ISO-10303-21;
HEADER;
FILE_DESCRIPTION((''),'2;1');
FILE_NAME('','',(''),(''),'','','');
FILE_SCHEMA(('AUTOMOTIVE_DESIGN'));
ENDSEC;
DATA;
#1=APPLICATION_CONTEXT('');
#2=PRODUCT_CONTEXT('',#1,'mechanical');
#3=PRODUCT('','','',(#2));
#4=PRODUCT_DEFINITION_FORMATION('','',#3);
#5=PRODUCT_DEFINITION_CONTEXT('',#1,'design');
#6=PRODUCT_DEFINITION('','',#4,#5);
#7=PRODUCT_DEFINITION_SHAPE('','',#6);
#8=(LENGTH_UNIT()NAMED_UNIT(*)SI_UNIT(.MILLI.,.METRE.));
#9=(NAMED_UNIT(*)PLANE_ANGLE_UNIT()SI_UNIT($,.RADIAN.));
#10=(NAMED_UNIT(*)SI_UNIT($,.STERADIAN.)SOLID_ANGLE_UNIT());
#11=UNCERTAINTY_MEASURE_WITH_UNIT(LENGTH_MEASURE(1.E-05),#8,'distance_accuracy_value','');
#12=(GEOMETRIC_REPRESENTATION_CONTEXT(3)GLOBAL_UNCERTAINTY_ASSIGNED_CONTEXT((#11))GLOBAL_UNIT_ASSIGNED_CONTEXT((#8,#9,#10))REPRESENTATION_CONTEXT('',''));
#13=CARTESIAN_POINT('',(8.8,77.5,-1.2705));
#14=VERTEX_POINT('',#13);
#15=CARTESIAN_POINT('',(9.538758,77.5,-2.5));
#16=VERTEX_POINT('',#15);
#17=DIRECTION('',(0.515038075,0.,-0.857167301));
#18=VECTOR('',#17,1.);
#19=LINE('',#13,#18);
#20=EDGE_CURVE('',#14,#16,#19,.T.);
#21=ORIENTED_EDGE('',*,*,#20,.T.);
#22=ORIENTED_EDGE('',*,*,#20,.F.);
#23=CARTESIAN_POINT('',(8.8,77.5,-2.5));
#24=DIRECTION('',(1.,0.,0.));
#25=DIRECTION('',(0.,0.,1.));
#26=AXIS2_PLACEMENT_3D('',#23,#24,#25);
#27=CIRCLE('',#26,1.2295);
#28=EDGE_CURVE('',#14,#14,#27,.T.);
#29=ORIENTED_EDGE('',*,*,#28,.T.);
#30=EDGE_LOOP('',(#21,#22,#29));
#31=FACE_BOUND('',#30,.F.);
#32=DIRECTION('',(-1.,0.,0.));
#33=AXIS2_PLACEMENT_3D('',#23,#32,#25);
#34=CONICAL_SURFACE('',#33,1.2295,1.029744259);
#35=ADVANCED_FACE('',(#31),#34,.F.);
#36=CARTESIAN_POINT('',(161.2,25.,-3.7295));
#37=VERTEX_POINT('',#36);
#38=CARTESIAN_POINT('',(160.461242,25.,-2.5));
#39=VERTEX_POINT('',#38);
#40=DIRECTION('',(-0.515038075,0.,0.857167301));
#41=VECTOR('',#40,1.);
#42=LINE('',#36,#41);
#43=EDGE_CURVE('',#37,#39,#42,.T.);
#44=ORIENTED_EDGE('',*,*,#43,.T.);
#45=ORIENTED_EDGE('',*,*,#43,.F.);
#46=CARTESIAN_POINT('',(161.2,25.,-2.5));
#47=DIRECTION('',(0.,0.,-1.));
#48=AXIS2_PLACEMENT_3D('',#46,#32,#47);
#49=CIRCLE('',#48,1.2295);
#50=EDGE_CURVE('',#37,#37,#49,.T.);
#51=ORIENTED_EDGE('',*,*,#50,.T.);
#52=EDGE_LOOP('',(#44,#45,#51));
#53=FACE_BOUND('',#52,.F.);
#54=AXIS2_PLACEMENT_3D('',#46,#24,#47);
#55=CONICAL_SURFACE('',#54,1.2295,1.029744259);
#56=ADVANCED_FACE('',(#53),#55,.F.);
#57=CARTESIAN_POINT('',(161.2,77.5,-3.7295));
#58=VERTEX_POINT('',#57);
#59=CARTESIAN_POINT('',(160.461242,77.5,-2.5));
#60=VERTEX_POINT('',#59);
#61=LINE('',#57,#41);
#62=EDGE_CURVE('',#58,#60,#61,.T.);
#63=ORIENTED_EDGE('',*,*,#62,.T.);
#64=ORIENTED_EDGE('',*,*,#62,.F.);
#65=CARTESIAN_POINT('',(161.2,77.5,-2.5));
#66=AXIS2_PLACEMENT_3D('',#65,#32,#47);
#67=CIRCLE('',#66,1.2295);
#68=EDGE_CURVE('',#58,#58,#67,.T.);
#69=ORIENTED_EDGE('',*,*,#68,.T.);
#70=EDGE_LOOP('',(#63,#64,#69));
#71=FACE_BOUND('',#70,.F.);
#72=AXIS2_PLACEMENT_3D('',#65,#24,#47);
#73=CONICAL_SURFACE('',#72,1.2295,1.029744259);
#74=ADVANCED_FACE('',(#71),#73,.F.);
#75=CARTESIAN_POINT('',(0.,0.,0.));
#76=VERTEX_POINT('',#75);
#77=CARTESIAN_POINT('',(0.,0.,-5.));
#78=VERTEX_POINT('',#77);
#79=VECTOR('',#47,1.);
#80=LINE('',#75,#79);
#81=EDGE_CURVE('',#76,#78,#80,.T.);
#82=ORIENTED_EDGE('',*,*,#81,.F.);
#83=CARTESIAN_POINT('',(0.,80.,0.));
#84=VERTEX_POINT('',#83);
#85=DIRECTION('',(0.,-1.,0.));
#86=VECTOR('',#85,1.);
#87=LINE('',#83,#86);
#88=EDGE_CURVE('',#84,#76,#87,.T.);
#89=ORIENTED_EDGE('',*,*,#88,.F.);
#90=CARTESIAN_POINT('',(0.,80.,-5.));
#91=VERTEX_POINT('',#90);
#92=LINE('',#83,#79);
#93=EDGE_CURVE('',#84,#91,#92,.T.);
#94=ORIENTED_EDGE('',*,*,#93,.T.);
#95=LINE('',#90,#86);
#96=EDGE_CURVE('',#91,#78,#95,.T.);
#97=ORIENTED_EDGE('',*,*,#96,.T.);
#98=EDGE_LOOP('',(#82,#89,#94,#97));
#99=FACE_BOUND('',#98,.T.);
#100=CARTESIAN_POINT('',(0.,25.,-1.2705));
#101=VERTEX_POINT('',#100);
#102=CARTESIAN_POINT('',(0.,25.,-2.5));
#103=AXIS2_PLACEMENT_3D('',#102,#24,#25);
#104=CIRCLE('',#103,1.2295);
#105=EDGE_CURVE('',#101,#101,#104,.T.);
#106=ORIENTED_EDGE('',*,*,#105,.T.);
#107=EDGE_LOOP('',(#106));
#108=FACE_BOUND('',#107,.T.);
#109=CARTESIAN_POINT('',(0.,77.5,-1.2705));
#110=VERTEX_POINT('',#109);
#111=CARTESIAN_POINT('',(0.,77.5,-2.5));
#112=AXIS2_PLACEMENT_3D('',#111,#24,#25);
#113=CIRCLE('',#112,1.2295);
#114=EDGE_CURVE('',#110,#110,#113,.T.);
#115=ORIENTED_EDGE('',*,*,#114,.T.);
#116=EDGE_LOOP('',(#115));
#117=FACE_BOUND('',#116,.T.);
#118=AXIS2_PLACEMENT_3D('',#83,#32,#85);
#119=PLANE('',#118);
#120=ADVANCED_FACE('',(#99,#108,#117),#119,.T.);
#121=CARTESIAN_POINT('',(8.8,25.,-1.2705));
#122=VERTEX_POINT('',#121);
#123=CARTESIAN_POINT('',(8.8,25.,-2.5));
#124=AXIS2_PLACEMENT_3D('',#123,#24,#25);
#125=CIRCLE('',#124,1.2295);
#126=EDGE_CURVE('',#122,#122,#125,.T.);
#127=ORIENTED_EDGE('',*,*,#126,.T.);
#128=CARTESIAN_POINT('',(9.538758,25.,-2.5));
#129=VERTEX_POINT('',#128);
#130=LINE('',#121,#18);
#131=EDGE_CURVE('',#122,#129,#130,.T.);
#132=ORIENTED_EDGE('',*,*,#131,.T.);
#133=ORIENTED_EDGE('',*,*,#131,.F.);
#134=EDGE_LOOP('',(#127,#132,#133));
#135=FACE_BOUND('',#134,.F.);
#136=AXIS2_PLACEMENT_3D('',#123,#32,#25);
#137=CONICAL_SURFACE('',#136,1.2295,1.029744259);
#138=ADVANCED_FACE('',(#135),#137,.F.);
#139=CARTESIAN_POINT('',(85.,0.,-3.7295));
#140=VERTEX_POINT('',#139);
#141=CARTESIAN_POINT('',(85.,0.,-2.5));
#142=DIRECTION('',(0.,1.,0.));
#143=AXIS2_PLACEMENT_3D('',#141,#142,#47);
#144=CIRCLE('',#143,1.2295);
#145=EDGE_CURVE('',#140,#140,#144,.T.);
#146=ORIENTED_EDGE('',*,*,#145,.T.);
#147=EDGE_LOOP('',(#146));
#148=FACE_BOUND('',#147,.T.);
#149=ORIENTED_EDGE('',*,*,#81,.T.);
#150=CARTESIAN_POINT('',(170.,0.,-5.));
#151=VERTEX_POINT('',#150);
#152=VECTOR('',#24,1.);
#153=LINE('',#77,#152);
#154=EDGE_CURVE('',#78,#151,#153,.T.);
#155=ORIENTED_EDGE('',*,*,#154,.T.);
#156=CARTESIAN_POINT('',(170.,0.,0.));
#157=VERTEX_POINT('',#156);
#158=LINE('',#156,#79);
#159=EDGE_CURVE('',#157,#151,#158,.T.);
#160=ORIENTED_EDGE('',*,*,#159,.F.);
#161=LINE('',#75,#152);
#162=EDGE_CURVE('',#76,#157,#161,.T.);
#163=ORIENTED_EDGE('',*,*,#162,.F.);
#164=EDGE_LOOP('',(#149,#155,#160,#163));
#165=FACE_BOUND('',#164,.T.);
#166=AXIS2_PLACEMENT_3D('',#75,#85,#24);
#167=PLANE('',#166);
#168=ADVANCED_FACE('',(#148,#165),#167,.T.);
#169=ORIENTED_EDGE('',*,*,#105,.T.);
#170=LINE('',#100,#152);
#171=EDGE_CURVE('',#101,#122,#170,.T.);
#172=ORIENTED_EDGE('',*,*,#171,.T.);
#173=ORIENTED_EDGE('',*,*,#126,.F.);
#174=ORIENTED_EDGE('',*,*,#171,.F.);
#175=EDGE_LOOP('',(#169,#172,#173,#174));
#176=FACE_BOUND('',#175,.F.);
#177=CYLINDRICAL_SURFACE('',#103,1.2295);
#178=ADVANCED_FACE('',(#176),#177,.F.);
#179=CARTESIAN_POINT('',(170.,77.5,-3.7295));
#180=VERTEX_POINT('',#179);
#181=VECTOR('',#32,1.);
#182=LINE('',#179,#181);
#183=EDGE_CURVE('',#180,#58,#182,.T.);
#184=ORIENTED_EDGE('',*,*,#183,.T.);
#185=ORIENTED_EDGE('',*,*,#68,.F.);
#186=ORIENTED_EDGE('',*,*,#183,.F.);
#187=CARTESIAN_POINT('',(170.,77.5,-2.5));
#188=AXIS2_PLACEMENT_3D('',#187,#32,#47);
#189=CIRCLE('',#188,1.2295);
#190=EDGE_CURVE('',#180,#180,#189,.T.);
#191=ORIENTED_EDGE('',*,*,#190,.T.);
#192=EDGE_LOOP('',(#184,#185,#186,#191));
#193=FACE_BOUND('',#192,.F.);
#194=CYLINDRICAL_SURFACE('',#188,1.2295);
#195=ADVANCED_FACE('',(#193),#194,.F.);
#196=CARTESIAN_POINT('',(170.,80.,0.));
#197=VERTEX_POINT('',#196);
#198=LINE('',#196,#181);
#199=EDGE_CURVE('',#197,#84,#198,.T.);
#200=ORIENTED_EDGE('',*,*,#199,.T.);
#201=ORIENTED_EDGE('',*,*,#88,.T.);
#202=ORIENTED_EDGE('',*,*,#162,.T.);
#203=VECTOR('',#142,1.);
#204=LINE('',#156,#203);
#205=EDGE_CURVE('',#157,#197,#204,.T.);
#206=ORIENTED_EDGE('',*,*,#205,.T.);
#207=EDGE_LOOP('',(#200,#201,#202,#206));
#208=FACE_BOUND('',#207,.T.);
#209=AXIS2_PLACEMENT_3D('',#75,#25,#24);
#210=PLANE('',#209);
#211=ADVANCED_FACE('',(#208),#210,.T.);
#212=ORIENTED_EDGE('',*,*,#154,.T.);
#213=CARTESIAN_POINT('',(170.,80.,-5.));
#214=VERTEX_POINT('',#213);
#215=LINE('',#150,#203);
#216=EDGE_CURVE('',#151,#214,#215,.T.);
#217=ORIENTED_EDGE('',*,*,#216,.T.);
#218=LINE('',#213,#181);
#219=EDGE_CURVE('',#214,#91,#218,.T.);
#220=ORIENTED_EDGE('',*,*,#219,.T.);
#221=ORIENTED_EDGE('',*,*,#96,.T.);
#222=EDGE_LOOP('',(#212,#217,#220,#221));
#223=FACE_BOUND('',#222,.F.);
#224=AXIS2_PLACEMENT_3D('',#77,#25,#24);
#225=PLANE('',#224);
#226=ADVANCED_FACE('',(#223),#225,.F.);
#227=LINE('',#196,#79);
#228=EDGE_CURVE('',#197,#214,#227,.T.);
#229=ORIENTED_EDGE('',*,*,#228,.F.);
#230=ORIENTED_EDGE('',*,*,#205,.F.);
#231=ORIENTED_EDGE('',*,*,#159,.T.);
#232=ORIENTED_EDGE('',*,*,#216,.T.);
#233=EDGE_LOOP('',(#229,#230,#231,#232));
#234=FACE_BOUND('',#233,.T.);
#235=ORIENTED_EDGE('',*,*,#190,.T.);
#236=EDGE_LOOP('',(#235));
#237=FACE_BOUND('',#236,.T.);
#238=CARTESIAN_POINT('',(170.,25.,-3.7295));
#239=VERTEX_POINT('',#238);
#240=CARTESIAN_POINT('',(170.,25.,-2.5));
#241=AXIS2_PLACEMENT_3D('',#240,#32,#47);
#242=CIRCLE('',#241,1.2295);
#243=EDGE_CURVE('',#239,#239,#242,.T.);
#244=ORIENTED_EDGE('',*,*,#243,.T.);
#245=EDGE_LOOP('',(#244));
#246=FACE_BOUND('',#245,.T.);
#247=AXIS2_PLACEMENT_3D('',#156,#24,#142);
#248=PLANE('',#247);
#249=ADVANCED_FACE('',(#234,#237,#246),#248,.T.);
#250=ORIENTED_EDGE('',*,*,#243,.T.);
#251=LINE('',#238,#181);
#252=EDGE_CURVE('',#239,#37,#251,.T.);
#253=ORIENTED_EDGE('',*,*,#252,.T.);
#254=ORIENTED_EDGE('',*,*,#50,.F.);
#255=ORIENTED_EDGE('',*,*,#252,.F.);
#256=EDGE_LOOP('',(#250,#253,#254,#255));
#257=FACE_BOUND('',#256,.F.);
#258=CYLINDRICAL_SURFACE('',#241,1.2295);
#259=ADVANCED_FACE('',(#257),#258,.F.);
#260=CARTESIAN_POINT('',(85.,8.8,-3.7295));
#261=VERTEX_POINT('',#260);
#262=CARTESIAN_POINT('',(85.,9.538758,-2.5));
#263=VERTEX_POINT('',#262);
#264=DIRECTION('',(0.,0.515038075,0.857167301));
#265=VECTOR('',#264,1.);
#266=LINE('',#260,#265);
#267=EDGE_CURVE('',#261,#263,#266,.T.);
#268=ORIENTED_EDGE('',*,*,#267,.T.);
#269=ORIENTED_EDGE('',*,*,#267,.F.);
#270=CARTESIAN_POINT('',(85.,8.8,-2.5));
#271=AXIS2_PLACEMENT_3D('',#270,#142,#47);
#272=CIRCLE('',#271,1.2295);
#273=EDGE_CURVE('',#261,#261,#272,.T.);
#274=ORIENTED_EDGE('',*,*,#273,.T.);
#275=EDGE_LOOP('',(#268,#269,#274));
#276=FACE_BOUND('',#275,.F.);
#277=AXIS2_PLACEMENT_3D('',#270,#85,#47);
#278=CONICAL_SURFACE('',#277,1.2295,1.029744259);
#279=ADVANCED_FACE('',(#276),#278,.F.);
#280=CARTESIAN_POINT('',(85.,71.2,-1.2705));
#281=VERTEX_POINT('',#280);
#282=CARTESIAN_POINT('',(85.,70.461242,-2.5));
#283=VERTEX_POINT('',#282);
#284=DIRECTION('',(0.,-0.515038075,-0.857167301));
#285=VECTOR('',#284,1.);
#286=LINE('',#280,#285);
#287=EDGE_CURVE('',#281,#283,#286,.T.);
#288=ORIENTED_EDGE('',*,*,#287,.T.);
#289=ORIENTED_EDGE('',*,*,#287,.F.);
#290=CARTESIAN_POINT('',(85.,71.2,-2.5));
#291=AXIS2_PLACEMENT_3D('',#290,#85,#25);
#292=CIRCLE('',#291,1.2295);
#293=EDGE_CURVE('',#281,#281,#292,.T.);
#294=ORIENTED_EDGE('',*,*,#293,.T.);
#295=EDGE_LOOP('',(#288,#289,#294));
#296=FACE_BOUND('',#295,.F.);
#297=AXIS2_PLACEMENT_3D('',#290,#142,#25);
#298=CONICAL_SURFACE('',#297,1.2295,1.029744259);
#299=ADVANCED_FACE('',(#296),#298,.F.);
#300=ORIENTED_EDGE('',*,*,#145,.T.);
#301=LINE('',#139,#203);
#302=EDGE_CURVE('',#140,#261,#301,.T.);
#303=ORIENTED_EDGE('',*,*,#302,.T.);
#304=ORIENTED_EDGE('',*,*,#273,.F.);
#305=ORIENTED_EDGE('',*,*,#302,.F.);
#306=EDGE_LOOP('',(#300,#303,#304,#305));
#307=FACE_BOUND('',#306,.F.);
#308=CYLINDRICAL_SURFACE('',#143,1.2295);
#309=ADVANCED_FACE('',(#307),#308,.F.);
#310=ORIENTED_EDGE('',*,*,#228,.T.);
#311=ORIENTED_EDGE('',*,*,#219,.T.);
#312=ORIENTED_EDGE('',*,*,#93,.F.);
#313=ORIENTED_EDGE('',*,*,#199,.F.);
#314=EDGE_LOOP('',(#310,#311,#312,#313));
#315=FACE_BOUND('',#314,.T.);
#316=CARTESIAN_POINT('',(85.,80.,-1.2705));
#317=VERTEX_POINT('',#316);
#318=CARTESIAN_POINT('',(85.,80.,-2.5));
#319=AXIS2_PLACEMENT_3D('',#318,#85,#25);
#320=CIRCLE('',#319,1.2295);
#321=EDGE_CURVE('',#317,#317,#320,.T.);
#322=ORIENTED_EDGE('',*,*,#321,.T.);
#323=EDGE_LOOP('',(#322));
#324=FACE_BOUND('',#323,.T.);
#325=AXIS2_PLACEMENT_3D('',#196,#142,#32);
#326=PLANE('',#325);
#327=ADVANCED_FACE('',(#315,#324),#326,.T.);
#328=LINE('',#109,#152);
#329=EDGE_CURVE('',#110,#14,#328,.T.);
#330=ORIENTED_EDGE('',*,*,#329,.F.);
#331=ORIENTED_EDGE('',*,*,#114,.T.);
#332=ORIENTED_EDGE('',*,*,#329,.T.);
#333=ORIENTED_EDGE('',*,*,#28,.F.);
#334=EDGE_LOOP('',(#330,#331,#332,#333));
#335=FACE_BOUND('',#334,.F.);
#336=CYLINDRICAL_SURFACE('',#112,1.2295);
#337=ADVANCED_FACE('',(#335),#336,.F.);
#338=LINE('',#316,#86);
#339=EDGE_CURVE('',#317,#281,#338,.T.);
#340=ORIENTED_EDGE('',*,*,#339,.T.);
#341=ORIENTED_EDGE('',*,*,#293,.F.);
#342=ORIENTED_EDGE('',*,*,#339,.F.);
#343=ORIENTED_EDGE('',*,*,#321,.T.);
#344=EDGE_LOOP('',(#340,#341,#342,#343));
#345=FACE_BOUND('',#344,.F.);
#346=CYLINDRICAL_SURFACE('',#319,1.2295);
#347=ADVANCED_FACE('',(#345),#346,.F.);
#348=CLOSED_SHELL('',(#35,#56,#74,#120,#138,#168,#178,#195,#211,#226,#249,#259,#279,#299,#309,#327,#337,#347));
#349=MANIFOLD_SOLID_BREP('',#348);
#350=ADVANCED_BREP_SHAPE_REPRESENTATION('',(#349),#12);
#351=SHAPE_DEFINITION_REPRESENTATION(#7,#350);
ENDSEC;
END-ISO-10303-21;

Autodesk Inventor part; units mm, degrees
ref_plane "YZ Plane" through (0, 0, 0) normal (1, 0, 0) x (0, 1, 0)
ref_plane "XZ Plane" through (0, 0, 0) normal (0, 1, 0) x (-1, 0, 0)
ref_plane "XY Plane" through (0, 0, 0) normal (0, 0, 1) x (1, 0, 0)
sketch "Esquisse1" plane through (0, 0, 0) normal (0, 0, 1) x (1, 0, 0)
  line L0 (0, 0) -> (170, 0)
  line L1 (170, 0) -> (170, 80)
  line L2 (170, 80) -> (0, 80)
  line L3 (0, 80) -> (0, 0)
  dimension "d0" = 170
  dimension "d1" = 80
extrude "Extrusion1" add sketch "Esquisse1" against normal blind 5
sketch "Esquisse3" plane through (170, 0, 0) normal (1, 0, 0) x (0, 0, -1)
  line L0 (0, 0) -> (0, 80) projected
  line L1 (0, 80) -> (0, 77.5)
  line L2 (0, 77.5) -> (2.5, 77.5)
  line L3 (0, 77.5) -> (2.5, 77.5) construction
  line L4 (0, 0) -> (2.5, 0)
  line L5 (2.5, 0) -> (2.5, 25)
  dimension "d4" = 2.5
  dimension "d5" = 2.5
  dimension "d6" = 0
  dimension "d14" = 25
hole "Perçage1" at (170, 77.5, -2.5) at (170, 25, -2.5) direction (-1, 0, 0) diameter 2.459 depth 8.8 tip angle 118 thread size "M3x0.5" class "6H" standard "ISO Metric profile"
sketch "Esquisse4" plane through (0, 0, 0) normal (-1, 0, 0) x (0, 0, 1)
  line L0 (0, 0) -> (-2.5, 0)
  line L1 (0, 0) -> (-5, 0) projected
  line L2 (-2.5, 0) -> (-2.5, 25)
  line L3 (0, 0) -> (0, 80) projected
  line L4 (0, 80) -> (-2.5, 80)
  line L5 (-2.5, 80) -> (-2.5, 77.5)
  dimension "d15" = 2.5
  dimension "d16" = 25
  dimension "d17" = 2.5
  dimension "d18" = 90
hole "Perçage2" at (0, 25, -2.5) at (0, 77.5, -2.5) direction (1, 0, 0) diameter 2.459 depth 8.8 tip angle 118 thread size "M3x0.5" class "6H" standard "ISO Metric profile"
sketch "Esquisse5" plane through (0, 80, 0) normal (0, 1, 0) x (1, 0, 0)
  line L0 (170, 0) -> (0, 0) projected
  line L1 (170, 5) -> (0, 5) projected
  point P0 (85, 2.5)
hole "Perçage3" at (85, 80, -2.5) direction (0, -1, 0) diameter 2.459 depth 8.8 tip angle 118 thread size "M3x0.5" class "6H" standard "ISO Metric profile"
sketch "Esquisse6" plane through (0, 0, 0) normal (0, -1, 0) x (1, 0, 0)
  line L0 (0, 0) -> (170, 0) projected
  line L1 (0, -5) -> (170, -5) projected
  point P0 (85, -2.5)
hole "Perçage4" at (85, 0, -2.5) direction (0, 1, 0) diameter 2.459 depth 8.8 tip angle 118 thread size "M3x0.5" class "6H" standard "ISO Metric profile"
properties part number "chassis_face_arriere"
